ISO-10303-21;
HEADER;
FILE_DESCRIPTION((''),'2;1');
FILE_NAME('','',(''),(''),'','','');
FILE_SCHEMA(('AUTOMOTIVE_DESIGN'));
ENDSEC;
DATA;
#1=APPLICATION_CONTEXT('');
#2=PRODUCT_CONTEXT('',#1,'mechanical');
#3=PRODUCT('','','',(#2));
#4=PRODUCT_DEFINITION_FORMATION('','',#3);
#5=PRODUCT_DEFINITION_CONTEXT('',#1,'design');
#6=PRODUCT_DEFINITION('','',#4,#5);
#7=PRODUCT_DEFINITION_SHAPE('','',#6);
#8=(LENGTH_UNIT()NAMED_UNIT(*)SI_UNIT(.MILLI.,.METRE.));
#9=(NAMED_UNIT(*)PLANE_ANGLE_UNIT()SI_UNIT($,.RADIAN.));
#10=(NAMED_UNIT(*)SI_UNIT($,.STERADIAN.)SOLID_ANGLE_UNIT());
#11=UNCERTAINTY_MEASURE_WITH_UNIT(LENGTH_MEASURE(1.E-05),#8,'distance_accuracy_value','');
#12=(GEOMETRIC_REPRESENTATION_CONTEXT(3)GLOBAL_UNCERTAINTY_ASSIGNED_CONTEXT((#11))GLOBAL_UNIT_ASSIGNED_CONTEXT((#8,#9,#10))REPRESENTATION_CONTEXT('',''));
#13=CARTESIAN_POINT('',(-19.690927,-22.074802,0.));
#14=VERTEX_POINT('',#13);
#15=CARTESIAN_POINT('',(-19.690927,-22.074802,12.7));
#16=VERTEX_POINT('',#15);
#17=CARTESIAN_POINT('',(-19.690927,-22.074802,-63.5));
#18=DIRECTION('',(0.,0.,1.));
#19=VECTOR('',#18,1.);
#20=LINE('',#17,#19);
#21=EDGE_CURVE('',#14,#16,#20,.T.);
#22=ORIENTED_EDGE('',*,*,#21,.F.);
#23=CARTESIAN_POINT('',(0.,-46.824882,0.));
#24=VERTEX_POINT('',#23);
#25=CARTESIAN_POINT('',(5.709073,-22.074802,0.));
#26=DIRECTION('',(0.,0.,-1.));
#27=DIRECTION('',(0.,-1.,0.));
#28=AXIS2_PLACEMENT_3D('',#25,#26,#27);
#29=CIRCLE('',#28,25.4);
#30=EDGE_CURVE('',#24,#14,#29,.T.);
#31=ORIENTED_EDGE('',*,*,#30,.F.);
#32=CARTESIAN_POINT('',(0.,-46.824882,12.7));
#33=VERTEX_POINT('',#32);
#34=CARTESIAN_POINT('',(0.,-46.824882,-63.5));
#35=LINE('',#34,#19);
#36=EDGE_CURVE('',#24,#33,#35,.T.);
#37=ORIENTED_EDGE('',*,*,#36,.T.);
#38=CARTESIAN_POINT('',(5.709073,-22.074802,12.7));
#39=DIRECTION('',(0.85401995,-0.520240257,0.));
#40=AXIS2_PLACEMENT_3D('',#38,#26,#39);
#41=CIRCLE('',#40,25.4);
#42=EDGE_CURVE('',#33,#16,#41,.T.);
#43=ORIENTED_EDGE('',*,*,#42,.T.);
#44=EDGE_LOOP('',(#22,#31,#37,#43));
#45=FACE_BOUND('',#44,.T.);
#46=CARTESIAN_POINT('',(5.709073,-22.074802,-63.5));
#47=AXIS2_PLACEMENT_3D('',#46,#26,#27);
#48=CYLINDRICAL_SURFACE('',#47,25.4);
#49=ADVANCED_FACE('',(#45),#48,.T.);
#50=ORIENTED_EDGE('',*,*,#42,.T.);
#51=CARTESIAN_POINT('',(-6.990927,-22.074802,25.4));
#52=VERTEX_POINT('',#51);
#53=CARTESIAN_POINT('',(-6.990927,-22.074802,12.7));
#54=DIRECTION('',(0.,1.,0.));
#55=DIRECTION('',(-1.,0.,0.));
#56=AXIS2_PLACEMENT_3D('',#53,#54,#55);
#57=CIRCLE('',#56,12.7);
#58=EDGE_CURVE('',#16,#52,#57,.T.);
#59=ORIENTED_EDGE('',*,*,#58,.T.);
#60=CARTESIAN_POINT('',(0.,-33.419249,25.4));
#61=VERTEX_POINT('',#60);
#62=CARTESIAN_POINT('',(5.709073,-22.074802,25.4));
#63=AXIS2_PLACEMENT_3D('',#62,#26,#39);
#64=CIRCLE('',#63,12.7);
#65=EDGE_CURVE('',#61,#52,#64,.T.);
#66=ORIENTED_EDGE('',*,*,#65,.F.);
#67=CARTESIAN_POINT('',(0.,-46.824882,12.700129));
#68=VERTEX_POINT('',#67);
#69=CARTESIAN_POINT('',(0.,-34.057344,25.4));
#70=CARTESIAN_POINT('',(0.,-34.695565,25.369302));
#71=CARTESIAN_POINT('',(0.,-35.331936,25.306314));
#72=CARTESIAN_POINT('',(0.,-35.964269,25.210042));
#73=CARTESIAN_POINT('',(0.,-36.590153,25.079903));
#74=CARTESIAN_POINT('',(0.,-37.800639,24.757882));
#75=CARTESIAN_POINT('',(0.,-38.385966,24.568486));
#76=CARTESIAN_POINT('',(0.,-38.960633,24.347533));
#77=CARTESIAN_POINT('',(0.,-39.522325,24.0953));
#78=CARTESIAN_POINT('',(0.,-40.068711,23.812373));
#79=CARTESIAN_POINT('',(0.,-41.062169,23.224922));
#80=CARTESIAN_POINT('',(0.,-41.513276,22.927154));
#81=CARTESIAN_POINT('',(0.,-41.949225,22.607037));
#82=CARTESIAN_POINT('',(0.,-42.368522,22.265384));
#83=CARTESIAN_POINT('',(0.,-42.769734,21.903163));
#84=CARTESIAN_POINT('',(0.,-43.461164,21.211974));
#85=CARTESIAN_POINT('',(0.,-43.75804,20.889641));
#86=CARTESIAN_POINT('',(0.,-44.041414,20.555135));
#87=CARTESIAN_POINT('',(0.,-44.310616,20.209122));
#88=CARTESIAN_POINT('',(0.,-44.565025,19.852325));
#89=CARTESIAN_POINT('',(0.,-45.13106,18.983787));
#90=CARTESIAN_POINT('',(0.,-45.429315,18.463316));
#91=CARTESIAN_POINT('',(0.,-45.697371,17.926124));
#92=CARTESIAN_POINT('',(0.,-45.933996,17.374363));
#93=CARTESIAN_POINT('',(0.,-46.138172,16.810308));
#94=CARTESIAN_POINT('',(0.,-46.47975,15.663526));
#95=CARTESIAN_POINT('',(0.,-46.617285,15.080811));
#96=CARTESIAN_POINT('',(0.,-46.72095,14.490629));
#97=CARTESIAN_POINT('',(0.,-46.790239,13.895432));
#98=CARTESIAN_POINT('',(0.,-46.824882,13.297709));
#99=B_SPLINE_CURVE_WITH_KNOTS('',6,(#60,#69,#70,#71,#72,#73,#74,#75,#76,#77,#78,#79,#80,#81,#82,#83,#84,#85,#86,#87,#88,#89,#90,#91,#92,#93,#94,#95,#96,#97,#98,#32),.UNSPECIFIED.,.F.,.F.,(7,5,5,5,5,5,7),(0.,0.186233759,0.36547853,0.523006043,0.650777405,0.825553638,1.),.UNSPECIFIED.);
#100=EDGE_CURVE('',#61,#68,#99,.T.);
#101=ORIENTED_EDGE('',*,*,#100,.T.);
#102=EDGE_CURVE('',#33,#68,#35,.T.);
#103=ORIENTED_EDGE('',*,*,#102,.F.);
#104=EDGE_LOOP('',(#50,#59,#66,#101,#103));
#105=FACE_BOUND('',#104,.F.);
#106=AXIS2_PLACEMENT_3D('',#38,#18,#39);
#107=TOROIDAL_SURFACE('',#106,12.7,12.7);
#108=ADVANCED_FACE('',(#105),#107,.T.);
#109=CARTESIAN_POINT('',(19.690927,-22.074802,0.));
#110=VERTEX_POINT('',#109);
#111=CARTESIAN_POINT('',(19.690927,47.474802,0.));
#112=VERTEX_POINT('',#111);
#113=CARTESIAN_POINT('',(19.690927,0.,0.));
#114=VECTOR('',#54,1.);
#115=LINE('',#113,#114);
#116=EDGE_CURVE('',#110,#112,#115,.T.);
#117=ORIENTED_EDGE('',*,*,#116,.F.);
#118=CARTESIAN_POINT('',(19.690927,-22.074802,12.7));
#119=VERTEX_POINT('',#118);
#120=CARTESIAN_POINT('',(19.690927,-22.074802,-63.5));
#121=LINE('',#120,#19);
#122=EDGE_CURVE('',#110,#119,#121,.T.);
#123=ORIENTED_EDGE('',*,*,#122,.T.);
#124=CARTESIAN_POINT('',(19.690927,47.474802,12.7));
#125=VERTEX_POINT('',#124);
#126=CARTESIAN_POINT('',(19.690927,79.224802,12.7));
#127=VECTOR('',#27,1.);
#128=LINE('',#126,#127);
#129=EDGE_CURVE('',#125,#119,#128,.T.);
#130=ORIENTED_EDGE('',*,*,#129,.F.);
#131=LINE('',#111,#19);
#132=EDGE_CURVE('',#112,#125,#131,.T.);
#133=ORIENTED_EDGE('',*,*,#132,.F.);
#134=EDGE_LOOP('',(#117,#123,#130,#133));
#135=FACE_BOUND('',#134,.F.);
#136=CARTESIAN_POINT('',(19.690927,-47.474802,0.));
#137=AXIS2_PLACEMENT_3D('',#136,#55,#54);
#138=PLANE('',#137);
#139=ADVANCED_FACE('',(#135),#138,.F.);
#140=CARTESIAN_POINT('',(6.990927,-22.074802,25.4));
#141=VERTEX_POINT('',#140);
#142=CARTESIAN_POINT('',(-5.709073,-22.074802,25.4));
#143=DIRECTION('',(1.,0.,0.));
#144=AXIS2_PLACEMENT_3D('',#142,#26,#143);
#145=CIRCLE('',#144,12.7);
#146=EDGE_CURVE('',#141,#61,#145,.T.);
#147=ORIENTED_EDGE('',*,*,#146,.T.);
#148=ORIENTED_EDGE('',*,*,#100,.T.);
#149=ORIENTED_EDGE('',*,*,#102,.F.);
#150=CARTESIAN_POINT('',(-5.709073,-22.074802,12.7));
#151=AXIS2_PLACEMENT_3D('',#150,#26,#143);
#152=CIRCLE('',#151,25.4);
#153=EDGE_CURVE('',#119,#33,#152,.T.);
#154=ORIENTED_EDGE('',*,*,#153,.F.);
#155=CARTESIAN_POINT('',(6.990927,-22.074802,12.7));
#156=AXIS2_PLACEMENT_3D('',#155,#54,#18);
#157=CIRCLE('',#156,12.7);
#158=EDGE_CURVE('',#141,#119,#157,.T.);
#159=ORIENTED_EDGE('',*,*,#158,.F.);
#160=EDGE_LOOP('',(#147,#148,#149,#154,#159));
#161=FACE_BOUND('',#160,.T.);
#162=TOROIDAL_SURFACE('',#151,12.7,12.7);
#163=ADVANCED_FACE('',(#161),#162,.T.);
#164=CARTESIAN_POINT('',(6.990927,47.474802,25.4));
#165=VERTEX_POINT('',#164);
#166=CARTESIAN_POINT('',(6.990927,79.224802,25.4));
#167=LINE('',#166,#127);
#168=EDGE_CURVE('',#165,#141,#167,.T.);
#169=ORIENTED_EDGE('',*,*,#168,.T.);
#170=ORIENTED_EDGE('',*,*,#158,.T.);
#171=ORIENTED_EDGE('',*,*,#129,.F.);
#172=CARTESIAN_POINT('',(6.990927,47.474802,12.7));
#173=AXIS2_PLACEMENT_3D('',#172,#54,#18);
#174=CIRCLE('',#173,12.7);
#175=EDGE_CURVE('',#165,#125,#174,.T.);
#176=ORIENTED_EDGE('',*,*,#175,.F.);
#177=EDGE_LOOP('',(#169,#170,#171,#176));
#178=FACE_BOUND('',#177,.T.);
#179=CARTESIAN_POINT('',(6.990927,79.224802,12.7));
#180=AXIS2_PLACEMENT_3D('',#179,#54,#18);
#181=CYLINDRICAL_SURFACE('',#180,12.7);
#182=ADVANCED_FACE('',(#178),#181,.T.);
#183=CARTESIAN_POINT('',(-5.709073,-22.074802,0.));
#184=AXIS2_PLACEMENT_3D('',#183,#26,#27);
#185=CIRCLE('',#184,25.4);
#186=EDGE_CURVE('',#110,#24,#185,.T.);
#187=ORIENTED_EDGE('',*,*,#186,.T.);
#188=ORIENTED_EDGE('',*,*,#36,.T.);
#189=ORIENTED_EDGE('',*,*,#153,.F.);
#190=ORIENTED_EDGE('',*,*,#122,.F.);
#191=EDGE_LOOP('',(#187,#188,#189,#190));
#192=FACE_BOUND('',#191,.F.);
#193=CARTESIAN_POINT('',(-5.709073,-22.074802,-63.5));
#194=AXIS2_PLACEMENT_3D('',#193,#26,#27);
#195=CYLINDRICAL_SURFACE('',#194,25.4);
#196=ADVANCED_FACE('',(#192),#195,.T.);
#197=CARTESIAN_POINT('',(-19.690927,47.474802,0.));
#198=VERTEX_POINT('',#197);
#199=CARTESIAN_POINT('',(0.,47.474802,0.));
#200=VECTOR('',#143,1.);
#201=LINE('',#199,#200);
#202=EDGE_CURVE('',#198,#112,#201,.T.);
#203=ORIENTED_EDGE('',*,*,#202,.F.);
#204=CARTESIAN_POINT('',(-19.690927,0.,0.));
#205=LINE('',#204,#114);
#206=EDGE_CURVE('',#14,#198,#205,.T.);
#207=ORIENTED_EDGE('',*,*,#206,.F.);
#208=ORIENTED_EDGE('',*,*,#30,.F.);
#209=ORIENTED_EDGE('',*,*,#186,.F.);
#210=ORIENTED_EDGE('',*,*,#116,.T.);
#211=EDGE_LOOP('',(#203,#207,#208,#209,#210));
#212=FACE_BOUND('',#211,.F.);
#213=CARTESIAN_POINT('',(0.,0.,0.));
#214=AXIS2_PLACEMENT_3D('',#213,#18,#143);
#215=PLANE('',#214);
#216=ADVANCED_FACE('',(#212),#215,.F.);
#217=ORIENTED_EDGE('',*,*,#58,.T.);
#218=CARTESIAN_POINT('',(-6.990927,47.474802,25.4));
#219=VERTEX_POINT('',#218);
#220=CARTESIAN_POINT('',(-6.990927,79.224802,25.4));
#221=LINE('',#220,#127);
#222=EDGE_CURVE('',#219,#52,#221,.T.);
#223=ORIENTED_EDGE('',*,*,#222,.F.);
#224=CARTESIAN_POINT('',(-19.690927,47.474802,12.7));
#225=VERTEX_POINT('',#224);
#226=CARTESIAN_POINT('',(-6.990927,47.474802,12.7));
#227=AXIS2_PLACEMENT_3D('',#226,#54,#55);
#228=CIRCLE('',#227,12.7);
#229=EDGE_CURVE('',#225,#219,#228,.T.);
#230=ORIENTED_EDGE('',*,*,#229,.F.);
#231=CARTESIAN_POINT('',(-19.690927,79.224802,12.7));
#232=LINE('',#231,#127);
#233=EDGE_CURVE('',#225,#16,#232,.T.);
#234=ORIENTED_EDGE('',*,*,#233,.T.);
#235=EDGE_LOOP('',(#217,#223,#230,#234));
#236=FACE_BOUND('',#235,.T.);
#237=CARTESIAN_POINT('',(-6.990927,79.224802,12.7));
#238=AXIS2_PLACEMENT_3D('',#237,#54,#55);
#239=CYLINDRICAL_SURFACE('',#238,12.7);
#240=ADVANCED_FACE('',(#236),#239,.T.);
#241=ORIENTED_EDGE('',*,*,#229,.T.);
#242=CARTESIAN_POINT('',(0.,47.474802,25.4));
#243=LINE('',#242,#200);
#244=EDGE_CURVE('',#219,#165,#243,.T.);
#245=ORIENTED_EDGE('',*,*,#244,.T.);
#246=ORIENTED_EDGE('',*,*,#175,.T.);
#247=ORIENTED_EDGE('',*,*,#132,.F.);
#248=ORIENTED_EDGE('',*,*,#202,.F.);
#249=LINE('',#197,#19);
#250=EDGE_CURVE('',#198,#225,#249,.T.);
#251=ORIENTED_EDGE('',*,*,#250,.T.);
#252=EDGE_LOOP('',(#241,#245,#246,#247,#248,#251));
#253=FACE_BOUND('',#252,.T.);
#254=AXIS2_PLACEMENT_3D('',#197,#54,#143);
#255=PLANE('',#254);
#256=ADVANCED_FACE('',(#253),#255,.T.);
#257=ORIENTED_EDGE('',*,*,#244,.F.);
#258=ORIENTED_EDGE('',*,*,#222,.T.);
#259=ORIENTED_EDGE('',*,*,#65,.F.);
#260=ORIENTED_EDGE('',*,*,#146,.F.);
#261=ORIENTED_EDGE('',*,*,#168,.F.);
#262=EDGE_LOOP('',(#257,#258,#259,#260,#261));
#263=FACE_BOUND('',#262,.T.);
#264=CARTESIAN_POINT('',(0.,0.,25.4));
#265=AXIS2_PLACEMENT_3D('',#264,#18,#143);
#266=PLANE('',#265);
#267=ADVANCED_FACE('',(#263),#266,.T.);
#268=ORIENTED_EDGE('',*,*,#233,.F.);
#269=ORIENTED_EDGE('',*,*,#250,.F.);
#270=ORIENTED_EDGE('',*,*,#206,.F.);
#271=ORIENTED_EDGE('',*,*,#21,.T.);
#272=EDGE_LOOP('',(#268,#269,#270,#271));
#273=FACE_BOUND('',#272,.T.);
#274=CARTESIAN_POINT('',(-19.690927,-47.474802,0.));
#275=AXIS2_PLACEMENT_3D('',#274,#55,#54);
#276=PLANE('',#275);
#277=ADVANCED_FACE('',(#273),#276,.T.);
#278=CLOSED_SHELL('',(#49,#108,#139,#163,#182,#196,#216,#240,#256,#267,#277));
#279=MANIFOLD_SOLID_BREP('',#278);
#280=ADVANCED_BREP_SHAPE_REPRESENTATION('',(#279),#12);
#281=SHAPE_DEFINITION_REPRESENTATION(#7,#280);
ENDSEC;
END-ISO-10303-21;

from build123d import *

# Parameters (mm, degrees)
F0_W        = 39.3818542361
F0_H        = 94.9496030807
F1_DEPTH    = 25.4
F2_T1_DEPTH = 152.4
F3_T1_DEPTH = 101.2996030808
F3_T4_ANGLE = 148.6516311692
F3_T6_ANGLE = 148.6516311692


# Not quite as in the source:
# - a fillet or chamfer that OpenCascade refuses, or shapes differently, is made with other operations: its cross-section is extruded or revolved along the edge and cut away or added


with BuildPart() as f1:
    # F0 (on Top) → F1 (new body)
    with BuildSketch(Plane.XY):
        Rectangle(F0_W, F0_H)
    extrude(amount=F1_DEPTH)

    # F2: fillet of radius 25.4 on 2 edges, made by hand

    # F2_s2 → F2_t1 (cut)
    with BuildSketch(Plane.XY.offset(-63.5)):
        with BuildLine():
            ThreePointArc((-5.7090728819, -47.4748015404), (12.2514393602, -40.0353137825), (19.6909271181, -22.0748015404))
            Line((19.6909271181, -22.0748015404), (19.6909271181, -47.4748015404))
            Line((19.6909271181, -47.4748015404), (-5.7090728819, -47.4748015404))
        make_face()
        with BuildLine():
            ThreePointArc((5.7090728819, -47.4748015404), (-12.2514393602, -40.0353137825), (-19.6909271181, -22.0748015404))
            Line((-19.6909271181, -22.0748015404), (-19.6909271181, -47.4748015404))
            Line((-19.6909271181, -47.4748015404), (5.7090728819, -47.4748015404))
        make_face()
    extrude(amount=F2_T1_DEPTH, mode=Mode.SUBTRACT)

    # F3: fillet of radius 12.7 on 4 edges, made by hand

    # F3_s2 → F3_t1 (cut)
    with BuildSketch(Plane.XZ.offset(-79.2248015404)):
        with BuildLine():
            ThreePointArc((6.9909271181, 25.4), (15.9711832391, 21.6802561211), (19.6909271181, 12.7))
            Line((19.6909271181, 12.7), (19.6909271181, 25.4))
            Line((19.6909271181, 25.4), (6.9909271181, 25.4))
        make_face()
        with BuildLine():
            ThreePointArc((-19.6909271181, 12.7), (-15.9711832391, 21.6802561211), (-6.9909271181, 25.4))
            Line((-6.9909271181, 25.4), (-19.6909271181, 25.4))
            Line((-19.6909271181, 25.4), (-19.6909271181, 12.7))
        make_face()
    extrude(amount=F3_T1_DEPTH, mode=Mode.SUBTRACT)

    # F3_s3 → F3_t4 (revolve, cut)
    with BuildSketch(Plane.XZ.offset(22.0748015403)):
        with BuildLine():
            ThreePointArc((6.9909271181, 25.4), (15.9711832392, 21.6802561211), (19.6909271181, 12.7))
            Line((19.6909271181, 12.7), (19.6909271181, 25.4))
            Line((19.6909271181, 25.4), (6.9909271181, 25.4))
        make_face()
    revolve(axis=Axis((-5.709072882, -22.0748015403, 25.4), (0, 0, -1)), revolution_arc=F3_T4_ANGLE, mode=Mode.SUBTRACT)

    # F3_s5 → F3_t6 (revolve, cut)
    with BuildSketch(Plane(origin=(-8.2625761257, -13.5637424397, 0), x_dir=(0, 0, 1), z_dir=(0.5202402568, 0.8540199501, 0))):
        with BuildLine():
            ThreePointArc((12.7, 41.759862561), (21.6802561211, 38.040118682), (25.4, 29.059862561))
            Line((25.4, 29.059862561), (25.4, 41.759862561))
            Line((25.4, 41.759862561), (12.7, 41.759862561))
        make_face()
    revolve(axis=Axis((5.709072882, -22.0748015403, 25.4), (0, 0, -1)), revolution_arc=F3_T6_ANGLE, mode=Mode.SUBTRACT)


solid = f1.part
